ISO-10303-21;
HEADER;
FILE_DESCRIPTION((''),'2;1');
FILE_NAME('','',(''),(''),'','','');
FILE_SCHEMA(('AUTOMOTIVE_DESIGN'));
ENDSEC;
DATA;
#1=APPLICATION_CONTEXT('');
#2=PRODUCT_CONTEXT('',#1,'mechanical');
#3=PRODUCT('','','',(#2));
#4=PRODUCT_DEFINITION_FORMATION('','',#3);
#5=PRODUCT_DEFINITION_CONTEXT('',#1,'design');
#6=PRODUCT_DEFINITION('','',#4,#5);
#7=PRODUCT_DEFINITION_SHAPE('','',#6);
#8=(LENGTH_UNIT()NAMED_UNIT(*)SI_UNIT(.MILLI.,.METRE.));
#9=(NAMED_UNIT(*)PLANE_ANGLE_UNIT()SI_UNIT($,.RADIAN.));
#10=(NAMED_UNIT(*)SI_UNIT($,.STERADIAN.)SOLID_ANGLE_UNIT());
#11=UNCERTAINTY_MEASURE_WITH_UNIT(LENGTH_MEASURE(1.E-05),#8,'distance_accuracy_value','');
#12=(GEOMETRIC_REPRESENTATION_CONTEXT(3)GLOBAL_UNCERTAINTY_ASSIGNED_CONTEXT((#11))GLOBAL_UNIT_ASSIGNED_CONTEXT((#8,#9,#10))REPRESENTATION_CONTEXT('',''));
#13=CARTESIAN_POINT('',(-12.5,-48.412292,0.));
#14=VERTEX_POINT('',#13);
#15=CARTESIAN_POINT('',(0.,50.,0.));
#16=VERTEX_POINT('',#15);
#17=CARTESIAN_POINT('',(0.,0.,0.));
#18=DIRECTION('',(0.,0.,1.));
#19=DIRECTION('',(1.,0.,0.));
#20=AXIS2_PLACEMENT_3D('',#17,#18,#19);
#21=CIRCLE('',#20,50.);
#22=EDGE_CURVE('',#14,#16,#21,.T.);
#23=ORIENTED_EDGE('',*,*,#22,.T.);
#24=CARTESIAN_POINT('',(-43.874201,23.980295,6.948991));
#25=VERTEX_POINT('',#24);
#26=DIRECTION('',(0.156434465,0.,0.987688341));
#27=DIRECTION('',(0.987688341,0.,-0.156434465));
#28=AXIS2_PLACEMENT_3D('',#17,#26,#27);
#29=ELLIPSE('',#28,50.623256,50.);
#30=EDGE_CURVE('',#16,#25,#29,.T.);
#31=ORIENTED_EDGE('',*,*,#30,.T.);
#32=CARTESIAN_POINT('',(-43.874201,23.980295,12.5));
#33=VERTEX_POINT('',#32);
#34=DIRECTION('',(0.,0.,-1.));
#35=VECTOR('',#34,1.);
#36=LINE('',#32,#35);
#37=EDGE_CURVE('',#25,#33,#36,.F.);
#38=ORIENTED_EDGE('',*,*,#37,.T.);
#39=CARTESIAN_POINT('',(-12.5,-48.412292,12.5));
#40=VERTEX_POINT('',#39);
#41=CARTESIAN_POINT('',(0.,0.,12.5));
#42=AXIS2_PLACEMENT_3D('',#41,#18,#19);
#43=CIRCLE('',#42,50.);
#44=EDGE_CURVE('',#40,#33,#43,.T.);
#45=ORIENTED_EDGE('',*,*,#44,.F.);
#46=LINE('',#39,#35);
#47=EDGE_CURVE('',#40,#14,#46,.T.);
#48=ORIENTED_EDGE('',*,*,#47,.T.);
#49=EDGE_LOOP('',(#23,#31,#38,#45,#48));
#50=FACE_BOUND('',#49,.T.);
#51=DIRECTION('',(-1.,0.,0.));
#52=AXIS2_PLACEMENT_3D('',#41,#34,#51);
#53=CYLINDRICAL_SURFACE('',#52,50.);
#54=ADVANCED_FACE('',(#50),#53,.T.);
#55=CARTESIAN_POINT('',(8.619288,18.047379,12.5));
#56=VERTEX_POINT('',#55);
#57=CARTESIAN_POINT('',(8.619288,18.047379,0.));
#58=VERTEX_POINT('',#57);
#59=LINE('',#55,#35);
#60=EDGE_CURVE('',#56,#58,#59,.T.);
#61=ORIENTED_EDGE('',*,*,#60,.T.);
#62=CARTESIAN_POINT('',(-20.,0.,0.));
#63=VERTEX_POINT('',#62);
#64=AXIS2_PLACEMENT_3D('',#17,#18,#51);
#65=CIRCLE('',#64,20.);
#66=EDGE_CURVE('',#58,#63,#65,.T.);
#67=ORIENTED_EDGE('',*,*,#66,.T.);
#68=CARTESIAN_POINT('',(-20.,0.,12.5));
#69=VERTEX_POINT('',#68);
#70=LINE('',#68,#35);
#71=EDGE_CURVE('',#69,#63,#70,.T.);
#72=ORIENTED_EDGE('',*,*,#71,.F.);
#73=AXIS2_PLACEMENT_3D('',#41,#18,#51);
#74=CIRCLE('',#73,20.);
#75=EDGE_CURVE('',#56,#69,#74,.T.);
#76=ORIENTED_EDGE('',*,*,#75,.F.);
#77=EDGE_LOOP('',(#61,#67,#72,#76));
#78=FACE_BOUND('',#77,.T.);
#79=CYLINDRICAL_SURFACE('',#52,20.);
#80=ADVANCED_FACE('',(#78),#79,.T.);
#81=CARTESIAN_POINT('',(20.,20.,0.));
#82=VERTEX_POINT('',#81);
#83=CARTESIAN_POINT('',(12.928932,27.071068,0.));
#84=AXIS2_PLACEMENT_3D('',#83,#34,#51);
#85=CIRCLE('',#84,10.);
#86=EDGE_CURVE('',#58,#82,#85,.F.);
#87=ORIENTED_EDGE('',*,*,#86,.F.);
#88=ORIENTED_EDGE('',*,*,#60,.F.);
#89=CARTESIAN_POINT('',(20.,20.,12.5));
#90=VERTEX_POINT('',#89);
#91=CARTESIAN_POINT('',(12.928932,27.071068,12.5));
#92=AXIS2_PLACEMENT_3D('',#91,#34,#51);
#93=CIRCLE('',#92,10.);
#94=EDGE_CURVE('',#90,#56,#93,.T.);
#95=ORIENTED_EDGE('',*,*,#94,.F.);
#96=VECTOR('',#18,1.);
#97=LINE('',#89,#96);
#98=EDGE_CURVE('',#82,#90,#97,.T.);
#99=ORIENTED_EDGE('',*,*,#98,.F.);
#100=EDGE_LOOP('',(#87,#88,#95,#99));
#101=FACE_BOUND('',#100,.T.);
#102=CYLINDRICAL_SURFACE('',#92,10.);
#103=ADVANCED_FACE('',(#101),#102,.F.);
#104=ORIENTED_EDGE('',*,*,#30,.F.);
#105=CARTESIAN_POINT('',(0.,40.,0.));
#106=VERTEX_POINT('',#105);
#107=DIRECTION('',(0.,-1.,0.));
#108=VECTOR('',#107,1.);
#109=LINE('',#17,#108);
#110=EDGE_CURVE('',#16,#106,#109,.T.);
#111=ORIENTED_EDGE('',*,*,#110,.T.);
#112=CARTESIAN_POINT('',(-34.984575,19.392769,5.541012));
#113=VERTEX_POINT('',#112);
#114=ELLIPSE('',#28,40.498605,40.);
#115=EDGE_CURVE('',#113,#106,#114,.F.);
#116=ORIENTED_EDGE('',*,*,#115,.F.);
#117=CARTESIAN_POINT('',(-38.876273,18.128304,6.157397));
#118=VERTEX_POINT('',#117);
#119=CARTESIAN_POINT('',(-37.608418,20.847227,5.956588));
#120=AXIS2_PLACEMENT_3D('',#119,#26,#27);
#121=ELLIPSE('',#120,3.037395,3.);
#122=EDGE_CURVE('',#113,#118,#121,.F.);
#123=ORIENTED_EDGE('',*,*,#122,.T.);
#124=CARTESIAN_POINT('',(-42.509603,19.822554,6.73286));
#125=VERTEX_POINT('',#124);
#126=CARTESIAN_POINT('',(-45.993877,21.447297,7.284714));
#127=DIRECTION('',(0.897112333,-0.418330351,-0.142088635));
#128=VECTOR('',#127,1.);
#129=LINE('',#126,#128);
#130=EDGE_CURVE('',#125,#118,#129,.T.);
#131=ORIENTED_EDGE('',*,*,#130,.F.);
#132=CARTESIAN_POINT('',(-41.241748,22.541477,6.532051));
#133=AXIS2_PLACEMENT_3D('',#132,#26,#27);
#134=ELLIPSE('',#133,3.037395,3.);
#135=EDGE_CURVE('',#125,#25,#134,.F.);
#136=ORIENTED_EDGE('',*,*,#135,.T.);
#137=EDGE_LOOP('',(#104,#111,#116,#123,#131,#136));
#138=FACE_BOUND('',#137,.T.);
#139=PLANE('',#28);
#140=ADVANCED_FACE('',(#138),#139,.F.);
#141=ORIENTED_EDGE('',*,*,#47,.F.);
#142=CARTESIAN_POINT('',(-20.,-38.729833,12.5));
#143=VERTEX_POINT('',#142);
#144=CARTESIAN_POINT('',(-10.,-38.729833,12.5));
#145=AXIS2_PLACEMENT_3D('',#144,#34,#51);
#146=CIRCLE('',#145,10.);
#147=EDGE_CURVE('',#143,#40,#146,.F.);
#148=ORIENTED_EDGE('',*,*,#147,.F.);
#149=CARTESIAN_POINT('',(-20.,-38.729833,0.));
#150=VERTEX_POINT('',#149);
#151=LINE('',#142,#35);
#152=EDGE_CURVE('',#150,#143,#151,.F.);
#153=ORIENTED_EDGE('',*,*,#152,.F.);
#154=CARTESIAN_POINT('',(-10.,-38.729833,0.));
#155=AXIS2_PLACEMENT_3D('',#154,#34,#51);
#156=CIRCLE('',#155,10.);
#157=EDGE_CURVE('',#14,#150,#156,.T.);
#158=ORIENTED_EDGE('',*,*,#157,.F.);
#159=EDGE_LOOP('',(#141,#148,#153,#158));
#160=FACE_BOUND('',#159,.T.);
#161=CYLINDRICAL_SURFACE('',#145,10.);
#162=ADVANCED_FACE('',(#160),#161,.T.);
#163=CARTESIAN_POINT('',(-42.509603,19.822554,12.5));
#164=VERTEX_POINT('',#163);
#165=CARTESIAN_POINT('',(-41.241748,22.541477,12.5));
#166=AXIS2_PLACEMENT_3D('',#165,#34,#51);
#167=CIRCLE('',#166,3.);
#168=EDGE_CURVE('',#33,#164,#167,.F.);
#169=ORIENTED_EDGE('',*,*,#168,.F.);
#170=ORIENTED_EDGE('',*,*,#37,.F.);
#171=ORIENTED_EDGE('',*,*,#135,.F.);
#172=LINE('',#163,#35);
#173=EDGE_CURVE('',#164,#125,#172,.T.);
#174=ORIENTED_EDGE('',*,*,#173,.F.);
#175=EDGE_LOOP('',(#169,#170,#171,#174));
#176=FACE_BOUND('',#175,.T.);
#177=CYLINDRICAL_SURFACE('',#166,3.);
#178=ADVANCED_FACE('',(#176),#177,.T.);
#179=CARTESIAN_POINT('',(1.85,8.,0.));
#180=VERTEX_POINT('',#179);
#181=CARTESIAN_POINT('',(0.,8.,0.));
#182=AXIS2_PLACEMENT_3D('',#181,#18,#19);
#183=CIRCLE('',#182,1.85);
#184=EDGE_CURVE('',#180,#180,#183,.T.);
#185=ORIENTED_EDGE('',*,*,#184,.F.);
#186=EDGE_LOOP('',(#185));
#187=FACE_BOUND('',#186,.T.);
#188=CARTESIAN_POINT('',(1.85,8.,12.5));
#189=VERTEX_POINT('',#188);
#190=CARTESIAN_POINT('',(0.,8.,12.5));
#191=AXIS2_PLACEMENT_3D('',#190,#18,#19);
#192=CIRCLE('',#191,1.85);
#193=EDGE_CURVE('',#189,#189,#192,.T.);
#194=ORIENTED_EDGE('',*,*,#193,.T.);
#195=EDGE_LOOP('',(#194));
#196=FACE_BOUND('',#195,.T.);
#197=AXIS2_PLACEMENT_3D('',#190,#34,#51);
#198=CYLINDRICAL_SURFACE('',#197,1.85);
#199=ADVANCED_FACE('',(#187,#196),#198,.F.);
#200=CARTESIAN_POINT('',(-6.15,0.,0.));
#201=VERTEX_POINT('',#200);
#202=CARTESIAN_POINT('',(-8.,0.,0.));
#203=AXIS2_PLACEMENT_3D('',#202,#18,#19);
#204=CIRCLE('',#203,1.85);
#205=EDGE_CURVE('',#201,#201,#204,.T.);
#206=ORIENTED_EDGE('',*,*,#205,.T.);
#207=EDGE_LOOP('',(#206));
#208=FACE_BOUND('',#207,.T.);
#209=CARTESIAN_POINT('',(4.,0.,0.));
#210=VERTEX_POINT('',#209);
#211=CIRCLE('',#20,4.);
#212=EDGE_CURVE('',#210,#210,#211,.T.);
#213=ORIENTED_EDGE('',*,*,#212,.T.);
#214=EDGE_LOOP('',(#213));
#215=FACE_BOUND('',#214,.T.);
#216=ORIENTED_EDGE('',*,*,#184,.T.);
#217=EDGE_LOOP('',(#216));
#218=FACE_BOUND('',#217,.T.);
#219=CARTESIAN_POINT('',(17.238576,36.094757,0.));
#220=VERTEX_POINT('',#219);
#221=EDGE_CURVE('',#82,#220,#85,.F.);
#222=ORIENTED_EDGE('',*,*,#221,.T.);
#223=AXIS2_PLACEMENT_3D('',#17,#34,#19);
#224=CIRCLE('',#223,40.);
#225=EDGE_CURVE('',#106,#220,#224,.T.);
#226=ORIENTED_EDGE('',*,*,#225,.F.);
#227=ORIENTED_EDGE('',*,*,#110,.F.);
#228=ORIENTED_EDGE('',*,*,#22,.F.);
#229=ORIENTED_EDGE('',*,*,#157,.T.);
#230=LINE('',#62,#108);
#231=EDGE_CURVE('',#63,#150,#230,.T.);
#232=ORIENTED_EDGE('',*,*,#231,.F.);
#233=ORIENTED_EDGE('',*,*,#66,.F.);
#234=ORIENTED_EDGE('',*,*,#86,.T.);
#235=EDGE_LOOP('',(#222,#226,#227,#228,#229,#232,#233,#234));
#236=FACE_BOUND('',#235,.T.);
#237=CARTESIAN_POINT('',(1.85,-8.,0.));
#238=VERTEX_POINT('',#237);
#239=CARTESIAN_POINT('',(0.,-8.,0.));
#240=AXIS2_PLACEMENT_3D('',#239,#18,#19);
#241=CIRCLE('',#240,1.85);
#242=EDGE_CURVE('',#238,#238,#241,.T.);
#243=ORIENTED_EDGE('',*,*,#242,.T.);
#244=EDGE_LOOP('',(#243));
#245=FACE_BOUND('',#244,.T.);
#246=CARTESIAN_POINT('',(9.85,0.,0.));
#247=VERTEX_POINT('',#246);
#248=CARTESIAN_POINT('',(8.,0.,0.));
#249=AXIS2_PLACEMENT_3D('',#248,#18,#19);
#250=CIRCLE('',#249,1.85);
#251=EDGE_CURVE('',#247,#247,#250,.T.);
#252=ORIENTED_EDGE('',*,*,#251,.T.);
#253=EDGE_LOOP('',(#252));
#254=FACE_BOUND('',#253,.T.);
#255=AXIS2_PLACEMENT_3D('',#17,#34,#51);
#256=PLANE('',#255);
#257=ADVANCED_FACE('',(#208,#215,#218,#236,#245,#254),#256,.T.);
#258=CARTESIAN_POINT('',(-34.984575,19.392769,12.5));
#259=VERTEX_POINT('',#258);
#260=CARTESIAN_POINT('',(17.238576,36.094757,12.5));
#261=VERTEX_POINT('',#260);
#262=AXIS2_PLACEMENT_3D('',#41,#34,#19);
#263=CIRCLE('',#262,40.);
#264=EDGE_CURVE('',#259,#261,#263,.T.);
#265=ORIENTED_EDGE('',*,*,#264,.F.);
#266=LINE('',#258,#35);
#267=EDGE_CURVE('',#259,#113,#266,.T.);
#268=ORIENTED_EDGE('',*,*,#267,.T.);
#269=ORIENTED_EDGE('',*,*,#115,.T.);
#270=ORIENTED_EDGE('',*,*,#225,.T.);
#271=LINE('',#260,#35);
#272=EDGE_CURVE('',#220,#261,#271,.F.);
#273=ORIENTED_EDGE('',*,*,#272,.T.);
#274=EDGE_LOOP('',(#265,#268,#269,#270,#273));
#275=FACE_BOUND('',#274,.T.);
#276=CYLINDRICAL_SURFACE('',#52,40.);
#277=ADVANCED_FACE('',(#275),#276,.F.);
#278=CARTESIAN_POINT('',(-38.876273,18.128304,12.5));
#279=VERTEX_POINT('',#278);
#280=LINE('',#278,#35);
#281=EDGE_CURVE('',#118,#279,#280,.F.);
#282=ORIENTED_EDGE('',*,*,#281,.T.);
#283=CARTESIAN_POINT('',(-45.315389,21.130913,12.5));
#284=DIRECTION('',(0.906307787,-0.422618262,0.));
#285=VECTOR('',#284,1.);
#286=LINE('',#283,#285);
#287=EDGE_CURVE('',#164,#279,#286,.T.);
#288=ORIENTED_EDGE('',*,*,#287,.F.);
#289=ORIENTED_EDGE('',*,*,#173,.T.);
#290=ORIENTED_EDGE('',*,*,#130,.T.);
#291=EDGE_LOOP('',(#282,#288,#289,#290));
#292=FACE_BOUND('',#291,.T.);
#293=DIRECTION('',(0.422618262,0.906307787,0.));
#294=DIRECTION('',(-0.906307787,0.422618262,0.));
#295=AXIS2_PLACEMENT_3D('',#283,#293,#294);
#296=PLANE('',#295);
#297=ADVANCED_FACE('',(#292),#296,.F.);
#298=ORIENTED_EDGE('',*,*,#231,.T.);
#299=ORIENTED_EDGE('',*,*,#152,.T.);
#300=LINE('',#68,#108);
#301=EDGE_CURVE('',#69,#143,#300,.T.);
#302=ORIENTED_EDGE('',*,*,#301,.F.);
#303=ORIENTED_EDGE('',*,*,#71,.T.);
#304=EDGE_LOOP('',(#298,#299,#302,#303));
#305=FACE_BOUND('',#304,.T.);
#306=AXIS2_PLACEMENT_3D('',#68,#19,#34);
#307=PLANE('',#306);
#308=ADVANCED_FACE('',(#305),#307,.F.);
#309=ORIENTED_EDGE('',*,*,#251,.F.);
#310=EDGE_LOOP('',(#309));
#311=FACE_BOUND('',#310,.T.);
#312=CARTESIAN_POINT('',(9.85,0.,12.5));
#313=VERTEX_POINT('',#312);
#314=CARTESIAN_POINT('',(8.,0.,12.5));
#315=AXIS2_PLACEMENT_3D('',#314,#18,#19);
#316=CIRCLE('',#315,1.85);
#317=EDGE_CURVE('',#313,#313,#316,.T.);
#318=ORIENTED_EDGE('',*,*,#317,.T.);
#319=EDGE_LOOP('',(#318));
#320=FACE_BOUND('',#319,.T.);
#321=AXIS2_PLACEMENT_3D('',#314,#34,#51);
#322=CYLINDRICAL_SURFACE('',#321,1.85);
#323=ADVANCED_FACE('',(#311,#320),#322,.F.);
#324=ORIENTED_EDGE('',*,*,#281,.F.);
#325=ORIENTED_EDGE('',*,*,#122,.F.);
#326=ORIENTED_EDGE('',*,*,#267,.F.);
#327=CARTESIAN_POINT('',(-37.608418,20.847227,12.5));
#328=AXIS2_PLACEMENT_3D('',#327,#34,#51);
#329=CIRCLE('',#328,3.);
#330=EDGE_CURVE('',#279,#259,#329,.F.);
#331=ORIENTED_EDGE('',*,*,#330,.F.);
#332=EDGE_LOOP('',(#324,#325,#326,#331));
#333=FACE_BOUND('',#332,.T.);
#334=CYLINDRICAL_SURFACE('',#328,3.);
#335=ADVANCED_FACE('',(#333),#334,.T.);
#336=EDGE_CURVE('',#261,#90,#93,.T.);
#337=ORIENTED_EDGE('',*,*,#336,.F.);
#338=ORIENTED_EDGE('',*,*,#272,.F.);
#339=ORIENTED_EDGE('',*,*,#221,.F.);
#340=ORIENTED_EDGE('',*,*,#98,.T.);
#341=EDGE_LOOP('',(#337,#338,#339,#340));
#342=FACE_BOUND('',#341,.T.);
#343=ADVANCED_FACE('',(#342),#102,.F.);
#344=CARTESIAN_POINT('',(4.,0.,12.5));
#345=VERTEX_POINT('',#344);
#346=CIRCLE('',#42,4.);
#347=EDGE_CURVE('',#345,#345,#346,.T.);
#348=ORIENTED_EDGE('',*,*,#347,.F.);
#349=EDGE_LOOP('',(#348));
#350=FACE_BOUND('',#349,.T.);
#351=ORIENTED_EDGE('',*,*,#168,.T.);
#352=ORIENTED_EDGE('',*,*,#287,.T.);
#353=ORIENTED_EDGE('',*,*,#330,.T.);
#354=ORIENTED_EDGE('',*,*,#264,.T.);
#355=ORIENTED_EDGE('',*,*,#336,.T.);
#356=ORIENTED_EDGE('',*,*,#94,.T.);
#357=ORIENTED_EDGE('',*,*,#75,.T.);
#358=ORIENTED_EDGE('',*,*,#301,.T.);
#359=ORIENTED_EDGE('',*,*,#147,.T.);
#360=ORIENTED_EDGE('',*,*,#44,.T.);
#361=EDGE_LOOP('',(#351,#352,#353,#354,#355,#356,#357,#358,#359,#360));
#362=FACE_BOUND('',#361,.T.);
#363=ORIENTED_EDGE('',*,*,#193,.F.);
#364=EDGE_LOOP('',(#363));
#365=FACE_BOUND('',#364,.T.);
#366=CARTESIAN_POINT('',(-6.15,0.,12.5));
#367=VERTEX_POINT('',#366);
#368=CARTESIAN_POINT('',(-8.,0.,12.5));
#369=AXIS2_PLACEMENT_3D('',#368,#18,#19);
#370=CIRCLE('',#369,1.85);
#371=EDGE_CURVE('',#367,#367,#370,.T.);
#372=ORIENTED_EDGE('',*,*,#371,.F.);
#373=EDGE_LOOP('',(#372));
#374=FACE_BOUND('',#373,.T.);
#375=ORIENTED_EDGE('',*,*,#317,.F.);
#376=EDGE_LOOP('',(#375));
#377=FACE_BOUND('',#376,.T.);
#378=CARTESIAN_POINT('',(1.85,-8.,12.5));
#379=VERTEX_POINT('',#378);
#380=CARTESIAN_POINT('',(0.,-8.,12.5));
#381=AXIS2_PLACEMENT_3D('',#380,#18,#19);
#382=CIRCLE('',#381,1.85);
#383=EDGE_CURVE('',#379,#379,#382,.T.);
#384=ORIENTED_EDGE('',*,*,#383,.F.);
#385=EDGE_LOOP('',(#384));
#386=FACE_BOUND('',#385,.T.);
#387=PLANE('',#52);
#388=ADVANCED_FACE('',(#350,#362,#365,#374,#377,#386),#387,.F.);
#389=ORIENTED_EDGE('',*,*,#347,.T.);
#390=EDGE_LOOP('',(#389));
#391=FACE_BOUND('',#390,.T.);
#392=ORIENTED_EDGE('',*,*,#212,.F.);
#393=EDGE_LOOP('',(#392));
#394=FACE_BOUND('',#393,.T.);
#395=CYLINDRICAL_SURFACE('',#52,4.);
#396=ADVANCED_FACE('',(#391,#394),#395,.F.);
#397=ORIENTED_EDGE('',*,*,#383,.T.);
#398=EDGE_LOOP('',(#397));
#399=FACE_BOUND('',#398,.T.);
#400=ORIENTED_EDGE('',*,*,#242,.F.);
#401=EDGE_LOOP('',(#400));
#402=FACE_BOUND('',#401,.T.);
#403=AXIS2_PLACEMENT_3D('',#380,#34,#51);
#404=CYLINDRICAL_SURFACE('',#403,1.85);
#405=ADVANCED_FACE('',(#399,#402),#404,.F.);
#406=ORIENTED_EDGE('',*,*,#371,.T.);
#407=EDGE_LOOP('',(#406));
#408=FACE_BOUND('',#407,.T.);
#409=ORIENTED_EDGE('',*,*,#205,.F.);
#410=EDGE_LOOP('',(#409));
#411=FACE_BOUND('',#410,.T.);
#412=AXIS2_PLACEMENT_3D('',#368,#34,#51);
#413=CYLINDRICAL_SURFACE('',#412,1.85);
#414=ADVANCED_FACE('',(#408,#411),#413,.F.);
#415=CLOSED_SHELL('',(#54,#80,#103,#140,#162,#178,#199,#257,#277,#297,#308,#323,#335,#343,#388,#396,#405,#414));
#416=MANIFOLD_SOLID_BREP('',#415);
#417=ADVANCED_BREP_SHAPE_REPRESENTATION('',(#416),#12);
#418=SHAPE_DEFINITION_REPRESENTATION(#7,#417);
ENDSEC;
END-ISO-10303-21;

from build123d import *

# Parameters (mm, degrees)
SKETCH1_R           = 4
SKETCH1_R_2         = 1.85
BOSS_EXTRUDE1_DEPTH = 12.5
FILLET1_R           = 10
FILLET2_R           = 3
FILLET3_R           = 10
CUT_EXTRUDE1_DEPTH  = 20


with BuildPart() as part:
    # Sketch1 → Boss-Extrude1 (new body)
    with BuildSketch(Plane.XY):
        with BuildLine():
            Line((14.142135624, 14.142135624), (28.284271247, 28.284271247))
            ThreePointArc((28.284271247, 28.284271247), (-6.945927107, 39.39231012), (-36.252311481, 16.90473047))
            Line((-36.252311481, 16.90473047), (-45.315389352, 21.130913087))
            ThreePointArc((-45.315389352, 21.130913087), (46.768835106, 17.682648638), (-20, -45.82575695))
            Line((-20, -45.82575695), (-20, 0))
            ThreePointArc((-20, 0), (-7.653668647, 18.47759065), (14.142135624, 14.142135624))
        make_face()
        Circle(SKETCH1_R, mode=Mode.SUBTRACT)
        with Locations((0, 8)):
            Circle(SKETCH1_R_2, mode=Mode.SUBTRACT)
        with Locations((8, 0)):
            Circle(SKETCH1_R_2, mode=Mode.SUBTRACT)
        with Locations((0, -8)):
            Circle(SKETCH1_R_2, mode=Mode.SUBTRACT)
        with Locations((-8, 0)):
            Circle(SKETCH1_R_2, mode=Mode.SUBTRACT)
    extrude(amount=BOSS_EXTRUDE1_DEPTH)

    # Fillet1
    fillet1_edges = [part.edges().sort_by_distance(p)[0] for p in [
        (28.284271247, 28.284271247, 6.25),
        (14.142135624, 14.142135624, 6.25),
    ]]
    fillet(fillet1_edges, radius=FILLET1_R - 0.0001)  # a hair under: the kernel refuses the full size

    # Fillet2
    fillet2_edges = [part.edges().sort_by_distance(p)[0] for p in [
        (-36.252311481, 16.90473047, 6.25),
        (-45.315389352, 21.130913087, 6.25),
    ]]
    fillet(fillet2_edges, radius=FILLET2_R)

    # Fillet3
    fillet3_edges = [part.edges().sort_by_distance(p)[0] for p in [
        (-20, -45.82575695, 6.25),
    ]]
    fillet(fillet3_edges, radius=FILLET3_R)

    # Sketch3 → Cut-Extrude1 (cut)
    with BuildSketch(Plane(origin=(0, 0, 0), x_dir=(0, -1, 0), z_dir=(-0.1564344650402244, 0, -0.9876883405951388))):
        Polygon((-59.412445721, 3.059679317), (-37.456599692, -8.541700414), (-10.399971435, 42.663516366), (-32.355817465, 54.264896097), align=None)
    extrude(amount=CUT_EXTRUDE1_DEPTH, mode=Mode.SUBTRACT)


solid = part.part
